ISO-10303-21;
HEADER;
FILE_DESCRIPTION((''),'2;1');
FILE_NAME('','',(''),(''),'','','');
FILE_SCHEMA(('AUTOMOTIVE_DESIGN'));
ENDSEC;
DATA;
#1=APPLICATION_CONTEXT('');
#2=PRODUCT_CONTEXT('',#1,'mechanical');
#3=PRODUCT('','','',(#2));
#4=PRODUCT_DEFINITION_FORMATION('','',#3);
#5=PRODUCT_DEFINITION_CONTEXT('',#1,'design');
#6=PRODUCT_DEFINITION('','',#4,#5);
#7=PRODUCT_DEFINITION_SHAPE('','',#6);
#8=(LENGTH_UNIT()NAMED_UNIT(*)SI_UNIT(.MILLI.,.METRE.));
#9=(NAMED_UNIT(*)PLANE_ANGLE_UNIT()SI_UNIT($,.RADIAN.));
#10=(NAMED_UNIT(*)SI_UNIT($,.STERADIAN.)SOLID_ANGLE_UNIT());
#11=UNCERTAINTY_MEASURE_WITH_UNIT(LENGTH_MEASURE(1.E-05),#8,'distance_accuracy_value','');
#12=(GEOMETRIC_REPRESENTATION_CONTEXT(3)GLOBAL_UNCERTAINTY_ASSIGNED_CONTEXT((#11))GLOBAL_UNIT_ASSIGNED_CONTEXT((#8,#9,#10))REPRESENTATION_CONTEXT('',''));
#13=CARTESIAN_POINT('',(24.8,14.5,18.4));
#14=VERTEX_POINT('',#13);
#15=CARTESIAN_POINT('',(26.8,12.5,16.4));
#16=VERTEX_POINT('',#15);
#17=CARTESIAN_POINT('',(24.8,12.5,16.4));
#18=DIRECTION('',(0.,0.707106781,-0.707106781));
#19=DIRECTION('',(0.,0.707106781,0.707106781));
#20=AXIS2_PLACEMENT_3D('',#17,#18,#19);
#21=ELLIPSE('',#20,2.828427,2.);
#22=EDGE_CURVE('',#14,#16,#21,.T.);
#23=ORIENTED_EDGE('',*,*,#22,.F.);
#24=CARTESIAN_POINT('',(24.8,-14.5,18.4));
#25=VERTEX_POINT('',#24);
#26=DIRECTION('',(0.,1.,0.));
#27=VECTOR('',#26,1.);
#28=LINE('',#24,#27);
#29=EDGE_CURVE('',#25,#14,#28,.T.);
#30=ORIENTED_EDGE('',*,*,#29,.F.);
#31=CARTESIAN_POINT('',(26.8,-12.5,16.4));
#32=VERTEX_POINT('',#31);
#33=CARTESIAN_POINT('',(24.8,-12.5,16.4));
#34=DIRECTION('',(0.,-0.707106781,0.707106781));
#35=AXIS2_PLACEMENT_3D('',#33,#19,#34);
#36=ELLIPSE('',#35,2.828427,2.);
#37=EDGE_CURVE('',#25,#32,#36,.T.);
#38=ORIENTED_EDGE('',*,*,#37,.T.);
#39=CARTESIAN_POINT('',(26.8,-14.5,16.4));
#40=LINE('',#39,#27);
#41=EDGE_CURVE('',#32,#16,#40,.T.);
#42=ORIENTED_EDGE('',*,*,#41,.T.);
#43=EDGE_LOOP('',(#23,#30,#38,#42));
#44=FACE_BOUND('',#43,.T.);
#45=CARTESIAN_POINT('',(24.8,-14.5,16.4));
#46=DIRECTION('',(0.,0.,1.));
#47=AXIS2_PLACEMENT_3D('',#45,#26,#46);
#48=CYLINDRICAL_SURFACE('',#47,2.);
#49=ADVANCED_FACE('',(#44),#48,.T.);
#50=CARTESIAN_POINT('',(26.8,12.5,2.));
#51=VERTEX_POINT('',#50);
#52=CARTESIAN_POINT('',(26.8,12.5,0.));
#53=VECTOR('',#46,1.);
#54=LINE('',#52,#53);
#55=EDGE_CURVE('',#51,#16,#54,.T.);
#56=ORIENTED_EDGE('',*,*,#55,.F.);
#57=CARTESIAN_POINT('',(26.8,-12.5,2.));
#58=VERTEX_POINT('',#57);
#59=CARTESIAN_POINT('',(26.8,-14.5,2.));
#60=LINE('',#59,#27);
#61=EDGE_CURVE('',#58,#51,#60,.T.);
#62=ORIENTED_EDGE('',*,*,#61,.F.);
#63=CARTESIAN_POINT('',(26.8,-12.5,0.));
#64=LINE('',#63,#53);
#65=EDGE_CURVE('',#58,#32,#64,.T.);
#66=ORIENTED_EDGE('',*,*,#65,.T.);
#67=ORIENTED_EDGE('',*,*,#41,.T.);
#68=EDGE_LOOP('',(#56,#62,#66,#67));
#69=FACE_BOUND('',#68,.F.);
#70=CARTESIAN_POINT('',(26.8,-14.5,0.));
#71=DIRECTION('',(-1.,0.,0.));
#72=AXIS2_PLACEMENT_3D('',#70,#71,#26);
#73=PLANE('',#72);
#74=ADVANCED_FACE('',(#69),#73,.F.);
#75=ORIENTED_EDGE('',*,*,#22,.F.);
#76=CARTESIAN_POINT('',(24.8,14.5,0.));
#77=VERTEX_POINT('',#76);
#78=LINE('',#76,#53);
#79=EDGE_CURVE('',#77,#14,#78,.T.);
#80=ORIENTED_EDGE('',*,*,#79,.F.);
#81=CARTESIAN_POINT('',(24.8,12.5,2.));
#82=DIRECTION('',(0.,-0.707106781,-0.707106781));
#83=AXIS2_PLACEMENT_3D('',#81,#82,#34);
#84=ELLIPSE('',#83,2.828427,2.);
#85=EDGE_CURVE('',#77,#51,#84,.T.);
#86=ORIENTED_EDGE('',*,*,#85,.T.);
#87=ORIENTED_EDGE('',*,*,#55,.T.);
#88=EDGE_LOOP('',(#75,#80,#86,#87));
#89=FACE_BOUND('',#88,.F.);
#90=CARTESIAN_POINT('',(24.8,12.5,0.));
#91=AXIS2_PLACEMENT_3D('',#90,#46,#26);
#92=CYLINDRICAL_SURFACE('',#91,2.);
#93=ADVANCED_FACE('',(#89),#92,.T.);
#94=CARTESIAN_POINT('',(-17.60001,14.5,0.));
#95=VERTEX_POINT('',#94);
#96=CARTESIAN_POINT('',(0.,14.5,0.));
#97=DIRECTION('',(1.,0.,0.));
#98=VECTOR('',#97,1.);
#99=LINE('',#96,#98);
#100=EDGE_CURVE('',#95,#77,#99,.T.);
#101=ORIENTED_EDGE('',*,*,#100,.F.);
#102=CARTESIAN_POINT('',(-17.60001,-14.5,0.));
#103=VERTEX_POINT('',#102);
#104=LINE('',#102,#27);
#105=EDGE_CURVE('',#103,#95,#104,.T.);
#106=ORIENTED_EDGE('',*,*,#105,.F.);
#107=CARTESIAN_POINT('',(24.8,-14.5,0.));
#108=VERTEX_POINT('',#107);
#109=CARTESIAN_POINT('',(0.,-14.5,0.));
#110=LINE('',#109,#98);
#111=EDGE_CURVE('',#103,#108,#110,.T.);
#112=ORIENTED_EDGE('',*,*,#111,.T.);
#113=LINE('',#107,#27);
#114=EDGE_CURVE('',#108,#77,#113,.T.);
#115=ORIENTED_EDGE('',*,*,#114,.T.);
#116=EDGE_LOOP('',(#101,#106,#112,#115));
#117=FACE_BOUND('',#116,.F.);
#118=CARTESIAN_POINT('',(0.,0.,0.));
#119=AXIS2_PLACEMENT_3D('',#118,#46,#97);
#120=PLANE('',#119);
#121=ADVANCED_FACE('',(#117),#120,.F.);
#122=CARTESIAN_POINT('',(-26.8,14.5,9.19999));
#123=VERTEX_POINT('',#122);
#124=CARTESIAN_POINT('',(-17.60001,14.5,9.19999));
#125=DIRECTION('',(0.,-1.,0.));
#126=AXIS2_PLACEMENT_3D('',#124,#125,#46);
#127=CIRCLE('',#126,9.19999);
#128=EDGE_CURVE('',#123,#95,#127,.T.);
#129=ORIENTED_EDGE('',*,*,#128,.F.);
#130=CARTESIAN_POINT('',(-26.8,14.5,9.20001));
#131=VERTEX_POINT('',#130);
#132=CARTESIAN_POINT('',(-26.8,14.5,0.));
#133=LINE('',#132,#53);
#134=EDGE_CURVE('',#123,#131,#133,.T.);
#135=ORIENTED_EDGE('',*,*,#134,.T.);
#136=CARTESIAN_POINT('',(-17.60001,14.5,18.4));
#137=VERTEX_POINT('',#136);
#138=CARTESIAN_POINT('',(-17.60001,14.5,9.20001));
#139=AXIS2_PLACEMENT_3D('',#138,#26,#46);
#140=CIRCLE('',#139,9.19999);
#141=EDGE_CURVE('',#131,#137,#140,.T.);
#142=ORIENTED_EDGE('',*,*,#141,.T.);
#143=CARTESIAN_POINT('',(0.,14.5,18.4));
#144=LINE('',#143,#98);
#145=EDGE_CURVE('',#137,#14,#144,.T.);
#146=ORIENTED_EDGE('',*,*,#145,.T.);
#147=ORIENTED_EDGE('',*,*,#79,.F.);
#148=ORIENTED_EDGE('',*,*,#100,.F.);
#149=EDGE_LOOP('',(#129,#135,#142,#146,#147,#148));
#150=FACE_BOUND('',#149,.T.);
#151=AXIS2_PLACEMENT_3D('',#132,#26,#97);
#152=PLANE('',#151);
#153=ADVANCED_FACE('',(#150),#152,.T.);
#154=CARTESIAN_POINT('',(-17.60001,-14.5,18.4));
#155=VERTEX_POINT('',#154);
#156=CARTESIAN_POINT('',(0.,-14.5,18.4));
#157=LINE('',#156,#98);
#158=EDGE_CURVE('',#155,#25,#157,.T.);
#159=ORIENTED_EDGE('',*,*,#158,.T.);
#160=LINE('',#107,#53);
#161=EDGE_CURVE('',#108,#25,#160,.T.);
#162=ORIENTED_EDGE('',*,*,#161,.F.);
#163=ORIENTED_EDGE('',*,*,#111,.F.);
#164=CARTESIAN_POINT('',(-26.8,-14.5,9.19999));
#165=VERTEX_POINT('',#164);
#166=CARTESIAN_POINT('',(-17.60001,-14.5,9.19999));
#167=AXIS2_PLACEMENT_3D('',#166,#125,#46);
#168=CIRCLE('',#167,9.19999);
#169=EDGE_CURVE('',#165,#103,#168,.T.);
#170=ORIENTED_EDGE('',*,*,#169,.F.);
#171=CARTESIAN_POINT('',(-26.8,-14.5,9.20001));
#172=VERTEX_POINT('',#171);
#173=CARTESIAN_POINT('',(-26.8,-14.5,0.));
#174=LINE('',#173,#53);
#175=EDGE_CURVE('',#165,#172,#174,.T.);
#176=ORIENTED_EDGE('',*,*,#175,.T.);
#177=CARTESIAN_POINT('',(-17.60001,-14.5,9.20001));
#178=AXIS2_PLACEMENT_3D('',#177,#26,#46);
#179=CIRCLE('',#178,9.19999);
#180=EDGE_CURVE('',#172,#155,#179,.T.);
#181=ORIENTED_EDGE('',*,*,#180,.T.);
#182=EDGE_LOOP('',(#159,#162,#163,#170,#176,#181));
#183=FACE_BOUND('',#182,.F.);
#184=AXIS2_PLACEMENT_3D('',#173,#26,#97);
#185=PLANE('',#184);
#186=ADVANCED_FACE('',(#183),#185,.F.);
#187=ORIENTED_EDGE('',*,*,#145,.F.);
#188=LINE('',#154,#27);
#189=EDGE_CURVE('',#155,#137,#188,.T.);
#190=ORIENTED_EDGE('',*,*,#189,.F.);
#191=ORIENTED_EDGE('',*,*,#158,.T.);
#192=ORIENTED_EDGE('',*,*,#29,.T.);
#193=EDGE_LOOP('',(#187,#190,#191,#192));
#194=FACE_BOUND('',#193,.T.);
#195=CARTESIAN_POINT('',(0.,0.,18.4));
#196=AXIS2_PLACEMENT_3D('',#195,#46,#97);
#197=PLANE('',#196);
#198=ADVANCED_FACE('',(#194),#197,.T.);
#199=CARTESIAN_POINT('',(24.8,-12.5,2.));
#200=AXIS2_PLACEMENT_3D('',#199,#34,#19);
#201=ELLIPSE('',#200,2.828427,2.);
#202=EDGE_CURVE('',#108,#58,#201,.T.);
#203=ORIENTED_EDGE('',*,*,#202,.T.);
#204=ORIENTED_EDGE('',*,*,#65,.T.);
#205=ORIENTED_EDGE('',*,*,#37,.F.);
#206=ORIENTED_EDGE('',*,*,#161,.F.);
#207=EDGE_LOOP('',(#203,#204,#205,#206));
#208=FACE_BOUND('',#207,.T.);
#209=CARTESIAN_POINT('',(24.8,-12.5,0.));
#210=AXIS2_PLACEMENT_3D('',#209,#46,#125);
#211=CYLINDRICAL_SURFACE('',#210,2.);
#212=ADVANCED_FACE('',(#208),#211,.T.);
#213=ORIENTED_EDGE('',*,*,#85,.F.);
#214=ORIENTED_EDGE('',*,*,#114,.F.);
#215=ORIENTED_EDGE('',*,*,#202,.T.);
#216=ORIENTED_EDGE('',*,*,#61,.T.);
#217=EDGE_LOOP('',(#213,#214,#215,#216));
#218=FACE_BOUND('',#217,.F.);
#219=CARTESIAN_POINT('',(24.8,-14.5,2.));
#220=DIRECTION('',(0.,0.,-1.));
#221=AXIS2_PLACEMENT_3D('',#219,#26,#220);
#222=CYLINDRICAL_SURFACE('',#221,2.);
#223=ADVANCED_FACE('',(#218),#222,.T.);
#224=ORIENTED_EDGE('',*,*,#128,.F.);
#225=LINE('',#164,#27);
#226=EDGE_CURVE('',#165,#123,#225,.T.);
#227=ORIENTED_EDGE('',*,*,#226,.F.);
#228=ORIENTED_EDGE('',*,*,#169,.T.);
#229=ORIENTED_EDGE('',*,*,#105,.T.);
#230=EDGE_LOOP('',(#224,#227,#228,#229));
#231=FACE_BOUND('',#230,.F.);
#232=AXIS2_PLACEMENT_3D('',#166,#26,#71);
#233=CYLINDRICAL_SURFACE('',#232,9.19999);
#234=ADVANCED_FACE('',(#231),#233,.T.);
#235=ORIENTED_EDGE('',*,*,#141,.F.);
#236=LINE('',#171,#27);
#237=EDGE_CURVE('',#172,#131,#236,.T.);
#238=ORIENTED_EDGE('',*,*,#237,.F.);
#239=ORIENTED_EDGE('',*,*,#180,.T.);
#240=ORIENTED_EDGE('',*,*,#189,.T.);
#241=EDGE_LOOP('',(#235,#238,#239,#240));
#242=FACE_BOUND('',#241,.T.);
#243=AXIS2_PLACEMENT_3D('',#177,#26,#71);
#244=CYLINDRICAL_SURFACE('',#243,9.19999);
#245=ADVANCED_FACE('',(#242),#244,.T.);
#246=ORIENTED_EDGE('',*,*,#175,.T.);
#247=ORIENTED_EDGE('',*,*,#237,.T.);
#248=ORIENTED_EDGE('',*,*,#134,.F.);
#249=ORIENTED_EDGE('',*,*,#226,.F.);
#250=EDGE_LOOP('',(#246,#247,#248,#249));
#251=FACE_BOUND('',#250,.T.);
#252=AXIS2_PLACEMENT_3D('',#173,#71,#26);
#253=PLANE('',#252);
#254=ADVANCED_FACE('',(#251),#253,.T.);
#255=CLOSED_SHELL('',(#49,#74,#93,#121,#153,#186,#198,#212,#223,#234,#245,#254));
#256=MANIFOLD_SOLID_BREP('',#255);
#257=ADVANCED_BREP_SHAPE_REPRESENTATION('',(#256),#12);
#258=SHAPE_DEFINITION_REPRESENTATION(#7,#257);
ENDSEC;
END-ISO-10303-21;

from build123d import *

# Parameters (mm, degrees)
F0_W     = 53.6
F0_H     = 29
F1_DEPTH = 18.4
F2_R     = 9.19999
F3_R     = 2


# Not quite as in the source:
# - a fillet or chamfer is up to 0.001 mm smaller than in the source, because OpenCascade refuses the exact size


with BuildPart() as f1:
    # F0 (on Top) → F1 (new body)
    with BuildSketch(Plane.XY):
        Rectangle(F0_W, F0_H)
    extrude(amount=F1_DEPTH)

    # F2 (radius 9.2 in the source; OpenCascade refuses exactly that, so slightly less here)
    f2_edges = [f1.edges().sort_by_distance(p)[0] for p in [
        (-26.8, 0, 18.4),
        (-26.8, 0, 0),
    ]]
    fillet(f2_edges, radius=F2_R)

    # F3
    f3_edges = [f1.edges().sort_by_distance(p)[0] for p in [
        (26.8, -14.5, 9.2),
        (26.8, 14.5, 9.2),
        (26.8, 0, 0),
        (26.8, 0, 18.4),
    ]]
    fillet(f3_edges, radius=F3_R)


solid = f1.part
